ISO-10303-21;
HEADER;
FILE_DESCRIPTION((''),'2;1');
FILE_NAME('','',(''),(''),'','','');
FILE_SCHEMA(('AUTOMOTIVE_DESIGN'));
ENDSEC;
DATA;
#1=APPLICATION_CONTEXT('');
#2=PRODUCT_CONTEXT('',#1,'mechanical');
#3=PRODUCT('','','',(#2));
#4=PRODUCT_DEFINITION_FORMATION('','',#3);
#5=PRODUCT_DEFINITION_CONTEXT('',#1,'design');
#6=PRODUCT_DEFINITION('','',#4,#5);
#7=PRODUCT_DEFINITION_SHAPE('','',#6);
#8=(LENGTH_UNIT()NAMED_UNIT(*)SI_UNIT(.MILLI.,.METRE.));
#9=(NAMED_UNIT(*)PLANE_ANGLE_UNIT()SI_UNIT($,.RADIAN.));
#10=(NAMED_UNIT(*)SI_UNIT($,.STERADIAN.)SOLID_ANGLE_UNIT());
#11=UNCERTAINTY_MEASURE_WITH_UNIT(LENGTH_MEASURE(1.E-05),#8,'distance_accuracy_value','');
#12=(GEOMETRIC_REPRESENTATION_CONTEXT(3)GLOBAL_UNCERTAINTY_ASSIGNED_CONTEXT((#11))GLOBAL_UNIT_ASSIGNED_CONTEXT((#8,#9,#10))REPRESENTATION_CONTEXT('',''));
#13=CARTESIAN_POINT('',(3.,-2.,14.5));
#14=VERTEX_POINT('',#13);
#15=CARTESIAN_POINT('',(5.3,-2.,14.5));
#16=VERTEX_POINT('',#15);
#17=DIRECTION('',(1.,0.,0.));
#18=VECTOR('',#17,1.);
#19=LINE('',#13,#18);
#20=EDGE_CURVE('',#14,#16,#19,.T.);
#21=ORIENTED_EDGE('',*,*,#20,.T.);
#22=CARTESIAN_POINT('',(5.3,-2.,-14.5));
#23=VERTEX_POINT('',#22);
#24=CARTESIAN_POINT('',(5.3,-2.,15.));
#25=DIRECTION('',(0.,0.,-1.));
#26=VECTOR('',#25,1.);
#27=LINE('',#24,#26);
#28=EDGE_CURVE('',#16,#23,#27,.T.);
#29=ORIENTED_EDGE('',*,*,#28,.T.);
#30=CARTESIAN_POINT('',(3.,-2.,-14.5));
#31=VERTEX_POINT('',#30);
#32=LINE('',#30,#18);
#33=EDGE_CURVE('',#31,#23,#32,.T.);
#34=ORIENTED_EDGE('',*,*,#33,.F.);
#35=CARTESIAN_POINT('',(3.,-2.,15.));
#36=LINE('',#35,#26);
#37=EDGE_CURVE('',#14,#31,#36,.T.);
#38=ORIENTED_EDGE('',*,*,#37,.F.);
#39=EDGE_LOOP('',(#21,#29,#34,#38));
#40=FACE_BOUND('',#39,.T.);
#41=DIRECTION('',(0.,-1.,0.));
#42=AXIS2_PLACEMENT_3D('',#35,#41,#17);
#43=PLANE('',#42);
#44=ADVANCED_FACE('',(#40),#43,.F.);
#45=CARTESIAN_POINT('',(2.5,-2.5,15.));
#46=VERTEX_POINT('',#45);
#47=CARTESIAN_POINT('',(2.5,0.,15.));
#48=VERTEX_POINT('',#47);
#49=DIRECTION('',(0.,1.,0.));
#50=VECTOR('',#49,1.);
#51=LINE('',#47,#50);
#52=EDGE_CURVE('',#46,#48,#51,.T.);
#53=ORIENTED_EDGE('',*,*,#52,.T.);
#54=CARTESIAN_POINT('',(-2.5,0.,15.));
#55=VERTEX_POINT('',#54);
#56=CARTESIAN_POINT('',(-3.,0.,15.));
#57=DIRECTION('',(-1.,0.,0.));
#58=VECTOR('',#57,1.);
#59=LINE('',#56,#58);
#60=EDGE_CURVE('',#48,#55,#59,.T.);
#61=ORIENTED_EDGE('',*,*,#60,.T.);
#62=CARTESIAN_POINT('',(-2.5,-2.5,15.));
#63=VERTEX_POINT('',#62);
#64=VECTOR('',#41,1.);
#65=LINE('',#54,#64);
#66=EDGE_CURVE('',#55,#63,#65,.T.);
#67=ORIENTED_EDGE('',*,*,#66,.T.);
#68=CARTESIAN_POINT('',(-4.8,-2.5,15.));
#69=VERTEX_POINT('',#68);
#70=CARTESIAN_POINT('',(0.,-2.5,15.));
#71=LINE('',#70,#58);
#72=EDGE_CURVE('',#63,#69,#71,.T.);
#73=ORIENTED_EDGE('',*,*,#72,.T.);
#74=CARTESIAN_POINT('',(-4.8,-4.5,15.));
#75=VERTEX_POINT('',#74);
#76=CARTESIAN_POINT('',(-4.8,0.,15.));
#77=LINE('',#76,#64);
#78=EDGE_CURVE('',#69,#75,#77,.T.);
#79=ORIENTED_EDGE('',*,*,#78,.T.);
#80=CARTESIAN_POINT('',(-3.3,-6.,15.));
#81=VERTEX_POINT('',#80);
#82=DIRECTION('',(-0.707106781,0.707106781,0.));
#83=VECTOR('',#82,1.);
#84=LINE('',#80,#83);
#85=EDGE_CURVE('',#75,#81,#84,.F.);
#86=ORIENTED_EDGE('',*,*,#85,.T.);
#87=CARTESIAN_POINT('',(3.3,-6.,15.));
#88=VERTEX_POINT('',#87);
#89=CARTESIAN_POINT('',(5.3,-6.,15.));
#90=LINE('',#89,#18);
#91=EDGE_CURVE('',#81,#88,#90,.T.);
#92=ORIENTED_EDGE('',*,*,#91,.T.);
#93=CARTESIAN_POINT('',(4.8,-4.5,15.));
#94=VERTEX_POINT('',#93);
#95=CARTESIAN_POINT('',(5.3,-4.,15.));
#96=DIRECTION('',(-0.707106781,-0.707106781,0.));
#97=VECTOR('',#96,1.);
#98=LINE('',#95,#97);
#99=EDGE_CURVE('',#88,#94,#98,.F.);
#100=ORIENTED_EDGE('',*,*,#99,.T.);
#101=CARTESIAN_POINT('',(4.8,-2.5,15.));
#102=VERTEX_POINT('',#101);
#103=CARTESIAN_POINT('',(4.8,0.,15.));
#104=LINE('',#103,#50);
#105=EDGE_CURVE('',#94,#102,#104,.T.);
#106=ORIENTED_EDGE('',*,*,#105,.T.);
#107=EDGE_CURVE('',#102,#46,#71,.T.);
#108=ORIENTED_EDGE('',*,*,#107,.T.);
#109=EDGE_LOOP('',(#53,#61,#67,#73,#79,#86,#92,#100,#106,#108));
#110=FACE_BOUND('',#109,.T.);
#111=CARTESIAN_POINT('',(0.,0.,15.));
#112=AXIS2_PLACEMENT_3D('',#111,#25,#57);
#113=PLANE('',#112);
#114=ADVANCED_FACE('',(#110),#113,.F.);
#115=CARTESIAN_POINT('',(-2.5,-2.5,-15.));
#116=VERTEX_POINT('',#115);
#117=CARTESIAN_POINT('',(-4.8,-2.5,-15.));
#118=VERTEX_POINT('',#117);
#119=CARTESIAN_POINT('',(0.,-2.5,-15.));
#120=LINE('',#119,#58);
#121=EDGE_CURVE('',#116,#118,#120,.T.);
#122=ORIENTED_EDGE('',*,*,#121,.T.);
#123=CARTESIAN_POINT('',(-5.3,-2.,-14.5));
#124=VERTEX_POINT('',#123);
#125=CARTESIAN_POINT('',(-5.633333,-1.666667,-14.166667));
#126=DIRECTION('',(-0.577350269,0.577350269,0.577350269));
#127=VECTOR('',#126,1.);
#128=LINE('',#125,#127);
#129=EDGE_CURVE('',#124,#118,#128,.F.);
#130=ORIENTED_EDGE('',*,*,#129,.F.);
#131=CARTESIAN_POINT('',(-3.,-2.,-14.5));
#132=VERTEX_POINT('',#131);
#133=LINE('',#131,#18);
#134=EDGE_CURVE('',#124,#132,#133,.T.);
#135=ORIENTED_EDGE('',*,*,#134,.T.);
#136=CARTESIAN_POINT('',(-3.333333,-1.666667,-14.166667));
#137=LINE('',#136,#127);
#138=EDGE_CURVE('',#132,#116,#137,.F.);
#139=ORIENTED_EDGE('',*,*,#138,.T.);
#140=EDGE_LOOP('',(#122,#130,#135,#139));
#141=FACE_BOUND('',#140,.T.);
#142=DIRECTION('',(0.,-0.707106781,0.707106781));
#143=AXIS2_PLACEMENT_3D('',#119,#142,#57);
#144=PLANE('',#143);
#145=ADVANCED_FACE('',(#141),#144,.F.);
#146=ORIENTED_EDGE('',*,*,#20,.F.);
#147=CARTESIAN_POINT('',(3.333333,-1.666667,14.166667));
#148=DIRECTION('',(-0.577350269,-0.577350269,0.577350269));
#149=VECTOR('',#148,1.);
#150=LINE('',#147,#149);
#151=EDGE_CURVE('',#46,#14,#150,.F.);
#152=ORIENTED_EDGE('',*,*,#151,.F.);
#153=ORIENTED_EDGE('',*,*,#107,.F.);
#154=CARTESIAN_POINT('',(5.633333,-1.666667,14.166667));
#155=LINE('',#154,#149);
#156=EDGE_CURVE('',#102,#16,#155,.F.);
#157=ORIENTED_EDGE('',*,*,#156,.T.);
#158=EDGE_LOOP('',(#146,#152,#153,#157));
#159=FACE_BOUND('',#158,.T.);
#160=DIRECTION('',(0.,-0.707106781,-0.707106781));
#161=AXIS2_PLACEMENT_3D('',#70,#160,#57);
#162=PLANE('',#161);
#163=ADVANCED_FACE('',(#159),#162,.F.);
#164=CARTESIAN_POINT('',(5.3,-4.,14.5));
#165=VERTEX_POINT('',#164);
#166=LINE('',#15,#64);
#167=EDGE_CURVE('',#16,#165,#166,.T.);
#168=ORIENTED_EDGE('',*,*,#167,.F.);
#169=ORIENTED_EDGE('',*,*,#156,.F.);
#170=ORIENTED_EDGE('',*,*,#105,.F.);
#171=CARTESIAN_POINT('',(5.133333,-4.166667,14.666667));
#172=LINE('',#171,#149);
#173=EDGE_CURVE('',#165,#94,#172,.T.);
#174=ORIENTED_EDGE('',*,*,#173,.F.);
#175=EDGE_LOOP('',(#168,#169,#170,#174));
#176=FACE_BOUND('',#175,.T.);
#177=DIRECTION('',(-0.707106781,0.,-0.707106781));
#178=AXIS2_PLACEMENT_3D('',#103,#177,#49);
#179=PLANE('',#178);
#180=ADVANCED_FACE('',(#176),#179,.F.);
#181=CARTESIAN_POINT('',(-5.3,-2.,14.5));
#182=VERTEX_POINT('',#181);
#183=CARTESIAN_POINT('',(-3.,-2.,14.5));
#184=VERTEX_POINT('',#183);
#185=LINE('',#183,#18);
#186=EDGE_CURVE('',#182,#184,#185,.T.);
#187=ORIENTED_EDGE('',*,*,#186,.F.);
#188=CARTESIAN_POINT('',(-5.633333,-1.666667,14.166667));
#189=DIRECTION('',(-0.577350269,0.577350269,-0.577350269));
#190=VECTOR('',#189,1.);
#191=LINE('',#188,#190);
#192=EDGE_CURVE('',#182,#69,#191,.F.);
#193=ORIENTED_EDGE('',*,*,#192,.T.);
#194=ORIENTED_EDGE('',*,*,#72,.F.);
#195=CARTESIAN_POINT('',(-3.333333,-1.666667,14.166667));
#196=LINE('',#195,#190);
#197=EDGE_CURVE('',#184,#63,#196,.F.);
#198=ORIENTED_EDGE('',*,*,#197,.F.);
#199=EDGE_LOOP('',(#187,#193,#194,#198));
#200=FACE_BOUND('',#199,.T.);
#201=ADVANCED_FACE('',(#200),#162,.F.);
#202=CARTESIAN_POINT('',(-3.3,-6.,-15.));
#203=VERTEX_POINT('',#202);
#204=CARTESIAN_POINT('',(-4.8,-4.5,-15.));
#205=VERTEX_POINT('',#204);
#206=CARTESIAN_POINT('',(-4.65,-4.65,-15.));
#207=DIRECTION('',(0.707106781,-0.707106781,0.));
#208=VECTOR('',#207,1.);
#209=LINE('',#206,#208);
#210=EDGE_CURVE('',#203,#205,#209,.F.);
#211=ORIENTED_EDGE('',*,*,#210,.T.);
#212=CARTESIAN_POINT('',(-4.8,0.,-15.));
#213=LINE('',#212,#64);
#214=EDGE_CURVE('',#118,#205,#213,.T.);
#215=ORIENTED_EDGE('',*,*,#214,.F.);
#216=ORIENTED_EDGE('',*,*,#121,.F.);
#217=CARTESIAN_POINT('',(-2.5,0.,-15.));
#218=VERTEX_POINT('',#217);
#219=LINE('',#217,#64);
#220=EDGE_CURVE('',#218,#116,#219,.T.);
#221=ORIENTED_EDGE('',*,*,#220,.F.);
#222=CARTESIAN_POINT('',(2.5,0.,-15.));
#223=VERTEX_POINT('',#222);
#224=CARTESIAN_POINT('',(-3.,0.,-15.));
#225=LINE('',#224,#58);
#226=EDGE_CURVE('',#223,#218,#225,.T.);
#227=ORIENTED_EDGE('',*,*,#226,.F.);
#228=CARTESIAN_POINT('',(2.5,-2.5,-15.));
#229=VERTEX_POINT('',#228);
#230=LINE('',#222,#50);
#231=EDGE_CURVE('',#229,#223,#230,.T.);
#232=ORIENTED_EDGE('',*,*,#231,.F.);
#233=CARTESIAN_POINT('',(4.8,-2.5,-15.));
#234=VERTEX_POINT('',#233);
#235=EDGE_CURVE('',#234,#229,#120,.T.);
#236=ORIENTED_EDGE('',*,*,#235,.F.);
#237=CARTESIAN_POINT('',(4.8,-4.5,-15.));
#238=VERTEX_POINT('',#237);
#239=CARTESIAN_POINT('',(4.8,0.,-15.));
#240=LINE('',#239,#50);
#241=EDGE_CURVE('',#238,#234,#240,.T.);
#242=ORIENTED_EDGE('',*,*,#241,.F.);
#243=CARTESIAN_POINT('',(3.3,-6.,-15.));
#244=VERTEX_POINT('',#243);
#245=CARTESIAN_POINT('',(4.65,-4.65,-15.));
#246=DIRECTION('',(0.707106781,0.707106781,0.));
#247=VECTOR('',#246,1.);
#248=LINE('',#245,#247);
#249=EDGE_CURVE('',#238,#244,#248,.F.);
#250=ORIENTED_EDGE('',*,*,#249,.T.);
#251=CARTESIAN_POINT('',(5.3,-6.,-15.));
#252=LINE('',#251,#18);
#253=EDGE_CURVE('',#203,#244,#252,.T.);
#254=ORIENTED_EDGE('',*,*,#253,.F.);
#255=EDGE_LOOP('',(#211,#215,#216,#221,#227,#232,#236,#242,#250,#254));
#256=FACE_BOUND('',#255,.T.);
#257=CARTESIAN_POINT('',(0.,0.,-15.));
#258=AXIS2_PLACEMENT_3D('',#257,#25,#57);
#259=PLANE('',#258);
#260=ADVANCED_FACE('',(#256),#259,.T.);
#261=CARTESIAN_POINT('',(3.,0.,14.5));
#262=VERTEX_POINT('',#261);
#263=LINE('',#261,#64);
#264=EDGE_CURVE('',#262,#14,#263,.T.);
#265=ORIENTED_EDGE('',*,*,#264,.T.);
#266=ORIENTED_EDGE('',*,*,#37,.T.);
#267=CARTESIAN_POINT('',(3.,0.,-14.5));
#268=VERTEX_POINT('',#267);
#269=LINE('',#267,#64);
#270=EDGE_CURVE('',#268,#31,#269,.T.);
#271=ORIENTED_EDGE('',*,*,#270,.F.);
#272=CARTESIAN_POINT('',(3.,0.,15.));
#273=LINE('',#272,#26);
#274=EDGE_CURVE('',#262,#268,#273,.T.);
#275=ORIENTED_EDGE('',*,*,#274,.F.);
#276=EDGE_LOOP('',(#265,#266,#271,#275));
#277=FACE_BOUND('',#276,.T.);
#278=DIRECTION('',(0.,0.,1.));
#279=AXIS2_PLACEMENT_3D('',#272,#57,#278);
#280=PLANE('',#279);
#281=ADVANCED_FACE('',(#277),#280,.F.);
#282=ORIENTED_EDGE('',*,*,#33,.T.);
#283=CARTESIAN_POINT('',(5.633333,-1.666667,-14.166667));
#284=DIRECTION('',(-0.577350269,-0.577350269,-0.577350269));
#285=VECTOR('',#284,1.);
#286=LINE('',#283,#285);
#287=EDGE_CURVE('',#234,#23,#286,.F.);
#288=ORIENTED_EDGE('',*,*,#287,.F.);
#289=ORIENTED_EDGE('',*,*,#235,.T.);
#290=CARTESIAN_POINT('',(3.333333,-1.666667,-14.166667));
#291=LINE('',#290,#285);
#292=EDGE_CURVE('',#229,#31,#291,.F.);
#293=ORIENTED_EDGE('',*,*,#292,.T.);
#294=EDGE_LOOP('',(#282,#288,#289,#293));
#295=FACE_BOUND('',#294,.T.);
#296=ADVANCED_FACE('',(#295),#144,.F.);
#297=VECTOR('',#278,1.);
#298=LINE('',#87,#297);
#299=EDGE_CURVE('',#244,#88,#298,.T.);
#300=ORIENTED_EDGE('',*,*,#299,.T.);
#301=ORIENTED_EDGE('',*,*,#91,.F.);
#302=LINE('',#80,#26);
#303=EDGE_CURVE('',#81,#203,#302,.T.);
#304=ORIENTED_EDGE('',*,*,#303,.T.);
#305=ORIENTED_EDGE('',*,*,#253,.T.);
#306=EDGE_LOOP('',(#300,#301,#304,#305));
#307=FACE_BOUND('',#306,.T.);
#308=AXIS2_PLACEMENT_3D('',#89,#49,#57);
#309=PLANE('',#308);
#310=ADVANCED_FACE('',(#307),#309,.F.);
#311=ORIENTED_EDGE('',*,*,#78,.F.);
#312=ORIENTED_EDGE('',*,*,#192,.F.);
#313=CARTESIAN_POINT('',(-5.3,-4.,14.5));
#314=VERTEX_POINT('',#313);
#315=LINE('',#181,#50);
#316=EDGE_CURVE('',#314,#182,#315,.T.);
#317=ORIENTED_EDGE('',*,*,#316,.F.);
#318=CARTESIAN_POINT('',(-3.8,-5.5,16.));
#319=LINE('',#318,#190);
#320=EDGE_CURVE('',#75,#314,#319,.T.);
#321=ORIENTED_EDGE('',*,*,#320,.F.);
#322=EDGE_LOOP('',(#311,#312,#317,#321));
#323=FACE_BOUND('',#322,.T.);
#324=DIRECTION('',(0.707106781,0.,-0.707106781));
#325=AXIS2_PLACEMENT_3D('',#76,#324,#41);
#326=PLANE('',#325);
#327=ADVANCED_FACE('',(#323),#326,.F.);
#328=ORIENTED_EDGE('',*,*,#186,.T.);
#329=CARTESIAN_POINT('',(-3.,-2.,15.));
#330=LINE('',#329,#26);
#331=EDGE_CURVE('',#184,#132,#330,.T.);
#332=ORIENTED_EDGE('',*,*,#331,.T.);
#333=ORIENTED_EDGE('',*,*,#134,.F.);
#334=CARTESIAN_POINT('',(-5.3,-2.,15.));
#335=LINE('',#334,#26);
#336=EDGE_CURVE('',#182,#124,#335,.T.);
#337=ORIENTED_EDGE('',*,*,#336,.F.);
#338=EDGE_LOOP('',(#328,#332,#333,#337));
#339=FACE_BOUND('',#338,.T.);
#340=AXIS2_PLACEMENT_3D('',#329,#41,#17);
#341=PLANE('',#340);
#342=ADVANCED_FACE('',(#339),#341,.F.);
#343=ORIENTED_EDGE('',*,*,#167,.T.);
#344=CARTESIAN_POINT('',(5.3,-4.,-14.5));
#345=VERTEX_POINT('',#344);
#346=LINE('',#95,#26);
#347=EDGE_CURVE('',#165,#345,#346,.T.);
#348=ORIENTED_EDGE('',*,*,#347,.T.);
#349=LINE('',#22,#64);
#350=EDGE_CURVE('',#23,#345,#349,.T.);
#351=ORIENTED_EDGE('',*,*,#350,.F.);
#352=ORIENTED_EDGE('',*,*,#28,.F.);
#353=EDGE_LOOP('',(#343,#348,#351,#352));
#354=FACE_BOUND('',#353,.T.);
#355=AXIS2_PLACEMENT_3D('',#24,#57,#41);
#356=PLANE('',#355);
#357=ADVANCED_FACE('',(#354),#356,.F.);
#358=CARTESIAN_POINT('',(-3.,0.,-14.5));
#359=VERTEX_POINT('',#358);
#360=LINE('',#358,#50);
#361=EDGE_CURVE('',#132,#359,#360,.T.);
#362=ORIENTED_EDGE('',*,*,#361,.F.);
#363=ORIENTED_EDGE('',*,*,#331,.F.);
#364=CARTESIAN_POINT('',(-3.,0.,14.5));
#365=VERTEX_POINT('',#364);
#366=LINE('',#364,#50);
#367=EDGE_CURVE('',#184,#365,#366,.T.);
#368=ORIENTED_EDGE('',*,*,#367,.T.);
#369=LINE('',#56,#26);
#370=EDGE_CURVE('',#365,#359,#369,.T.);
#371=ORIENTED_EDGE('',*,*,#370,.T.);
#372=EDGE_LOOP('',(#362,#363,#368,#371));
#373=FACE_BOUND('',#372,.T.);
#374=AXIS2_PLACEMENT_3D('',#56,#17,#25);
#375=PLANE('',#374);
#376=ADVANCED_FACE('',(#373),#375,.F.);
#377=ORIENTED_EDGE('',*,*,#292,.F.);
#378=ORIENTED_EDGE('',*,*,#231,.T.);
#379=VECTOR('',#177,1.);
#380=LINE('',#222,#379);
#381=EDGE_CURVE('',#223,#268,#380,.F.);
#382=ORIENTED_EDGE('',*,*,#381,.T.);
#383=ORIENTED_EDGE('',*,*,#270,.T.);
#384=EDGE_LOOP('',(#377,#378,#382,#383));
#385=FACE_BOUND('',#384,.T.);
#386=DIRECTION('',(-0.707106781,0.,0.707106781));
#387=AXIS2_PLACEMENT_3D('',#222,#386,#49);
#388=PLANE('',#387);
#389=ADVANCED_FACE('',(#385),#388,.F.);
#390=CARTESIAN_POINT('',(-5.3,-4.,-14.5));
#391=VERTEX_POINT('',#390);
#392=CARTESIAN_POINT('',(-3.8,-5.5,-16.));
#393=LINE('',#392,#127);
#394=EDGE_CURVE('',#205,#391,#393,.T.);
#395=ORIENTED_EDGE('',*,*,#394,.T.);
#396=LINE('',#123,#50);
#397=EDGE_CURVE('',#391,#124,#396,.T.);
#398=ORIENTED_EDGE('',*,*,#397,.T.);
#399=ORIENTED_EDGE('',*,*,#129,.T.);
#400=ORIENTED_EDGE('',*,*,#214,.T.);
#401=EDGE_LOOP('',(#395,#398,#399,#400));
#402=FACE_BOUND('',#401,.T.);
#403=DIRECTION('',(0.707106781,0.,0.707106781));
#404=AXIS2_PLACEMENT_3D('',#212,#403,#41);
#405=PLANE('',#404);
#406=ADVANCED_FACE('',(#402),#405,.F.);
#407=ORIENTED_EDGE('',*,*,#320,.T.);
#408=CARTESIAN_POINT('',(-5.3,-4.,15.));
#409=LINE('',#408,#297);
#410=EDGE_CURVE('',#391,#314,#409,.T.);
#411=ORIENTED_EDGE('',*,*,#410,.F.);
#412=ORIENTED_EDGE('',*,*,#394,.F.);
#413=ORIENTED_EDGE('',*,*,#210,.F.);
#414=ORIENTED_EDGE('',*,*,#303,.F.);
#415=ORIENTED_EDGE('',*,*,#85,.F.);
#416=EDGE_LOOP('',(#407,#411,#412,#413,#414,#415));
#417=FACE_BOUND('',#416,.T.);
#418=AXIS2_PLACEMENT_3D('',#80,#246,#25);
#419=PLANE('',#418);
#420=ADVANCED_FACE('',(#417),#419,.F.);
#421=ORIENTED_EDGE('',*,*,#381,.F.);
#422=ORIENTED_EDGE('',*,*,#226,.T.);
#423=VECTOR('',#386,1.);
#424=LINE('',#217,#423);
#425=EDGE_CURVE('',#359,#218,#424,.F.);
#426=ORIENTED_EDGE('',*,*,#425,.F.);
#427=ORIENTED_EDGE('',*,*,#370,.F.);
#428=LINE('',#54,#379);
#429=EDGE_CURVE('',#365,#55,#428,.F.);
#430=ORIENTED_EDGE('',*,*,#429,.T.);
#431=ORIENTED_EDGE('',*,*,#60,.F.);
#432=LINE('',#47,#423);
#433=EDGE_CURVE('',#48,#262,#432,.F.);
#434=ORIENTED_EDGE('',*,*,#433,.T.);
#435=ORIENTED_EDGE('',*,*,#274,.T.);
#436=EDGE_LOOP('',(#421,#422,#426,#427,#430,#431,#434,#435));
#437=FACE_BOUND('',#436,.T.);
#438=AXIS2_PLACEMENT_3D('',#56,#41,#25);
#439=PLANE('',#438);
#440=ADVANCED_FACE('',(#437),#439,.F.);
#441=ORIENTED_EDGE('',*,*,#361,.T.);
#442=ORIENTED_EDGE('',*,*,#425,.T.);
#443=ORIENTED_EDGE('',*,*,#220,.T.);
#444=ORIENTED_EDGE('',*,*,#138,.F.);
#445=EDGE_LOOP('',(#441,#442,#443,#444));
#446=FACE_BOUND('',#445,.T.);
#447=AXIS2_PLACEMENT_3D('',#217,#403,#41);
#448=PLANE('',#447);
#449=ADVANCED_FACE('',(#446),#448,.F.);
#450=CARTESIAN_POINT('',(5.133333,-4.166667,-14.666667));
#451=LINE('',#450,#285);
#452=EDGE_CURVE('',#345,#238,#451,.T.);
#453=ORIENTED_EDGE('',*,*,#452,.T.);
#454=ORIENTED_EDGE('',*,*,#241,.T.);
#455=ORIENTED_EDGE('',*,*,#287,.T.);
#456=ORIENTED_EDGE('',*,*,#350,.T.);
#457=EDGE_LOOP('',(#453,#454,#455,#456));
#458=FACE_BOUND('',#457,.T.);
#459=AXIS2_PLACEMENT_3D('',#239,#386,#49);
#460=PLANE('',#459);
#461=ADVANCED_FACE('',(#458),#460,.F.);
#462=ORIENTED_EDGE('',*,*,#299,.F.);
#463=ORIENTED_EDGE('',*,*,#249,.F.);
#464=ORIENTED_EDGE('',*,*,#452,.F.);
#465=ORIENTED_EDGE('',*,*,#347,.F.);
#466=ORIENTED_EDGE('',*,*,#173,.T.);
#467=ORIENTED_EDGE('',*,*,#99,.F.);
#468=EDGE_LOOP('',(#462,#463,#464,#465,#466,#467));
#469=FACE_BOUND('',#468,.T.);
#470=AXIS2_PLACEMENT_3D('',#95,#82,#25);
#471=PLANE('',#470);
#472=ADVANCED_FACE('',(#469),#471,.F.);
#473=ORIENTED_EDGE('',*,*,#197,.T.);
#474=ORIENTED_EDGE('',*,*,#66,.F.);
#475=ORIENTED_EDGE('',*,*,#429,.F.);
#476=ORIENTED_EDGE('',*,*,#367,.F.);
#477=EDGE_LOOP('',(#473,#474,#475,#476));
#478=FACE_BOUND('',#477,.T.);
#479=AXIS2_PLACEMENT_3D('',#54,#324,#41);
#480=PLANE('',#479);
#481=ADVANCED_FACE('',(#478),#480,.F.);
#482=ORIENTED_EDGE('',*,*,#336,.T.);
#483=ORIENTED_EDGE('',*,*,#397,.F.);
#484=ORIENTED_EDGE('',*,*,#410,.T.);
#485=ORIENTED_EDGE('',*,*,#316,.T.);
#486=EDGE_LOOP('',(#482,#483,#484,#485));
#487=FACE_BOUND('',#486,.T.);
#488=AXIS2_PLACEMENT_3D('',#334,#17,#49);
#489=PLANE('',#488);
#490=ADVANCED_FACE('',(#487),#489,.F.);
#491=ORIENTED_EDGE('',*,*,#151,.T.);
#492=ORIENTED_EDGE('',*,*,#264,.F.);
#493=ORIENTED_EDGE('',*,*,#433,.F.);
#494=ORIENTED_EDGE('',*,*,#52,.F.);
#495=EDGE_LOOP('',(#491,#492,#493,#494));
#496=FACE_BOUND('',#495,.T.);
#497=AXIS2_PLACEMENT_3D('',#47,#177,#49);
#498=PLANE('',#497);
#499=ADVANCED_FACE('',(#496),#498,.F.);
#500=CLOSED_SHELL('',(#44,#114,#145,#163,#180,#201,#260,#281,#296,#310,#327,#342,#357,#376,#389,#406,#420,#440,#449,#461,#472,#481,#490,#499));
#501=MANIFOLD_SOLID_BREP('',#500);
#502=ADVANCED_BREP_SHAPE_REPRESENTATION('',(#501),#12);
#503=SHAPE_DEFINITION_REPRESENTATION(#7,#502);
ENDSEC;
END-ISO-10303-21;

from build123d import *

# Parameters (mm, degrees)
EXTRUDE_1_DEPTH  = 15
CHAMFER_1_SIZE   = 2
CHAMFER_2_SIZE   = 0.5
MIRROR_START     = -8.660254038
MIRROR_2_DEPTH   = 2.193931023
MIRROR_START_2   = 6.466323015
MIRROR_2_2_DEPTH = 2.193931023


# Read off the part's stored shape, not the designer's step: 镜向2
with BuildPart() as part:
    # 草图1 → 凸台-拉伸1 (new, symmetric)
    with BuildSketch(Plane.XY):
        Polygon((-3, 0), (3, 0), (3, -2), (5.3, -2), (5.3, -6), (-5.3, -6), (-5.3, -2), (-3, -2), align=None)
    extrude(amount=EXTRUDE_1_DEPTH, both=True)

    # 倒角1
    chamfer_1_edges = [part.edges().sort_by_distance(p)[0] for p in [
        (5.3, -6, 0),
        (-5.3, -6, 0),
    ]]
    chamfer(chamfer_1_edges, length=CHAMFER_1_SIZE)

    # 倒角2
    chamfer_2_edges = [part.edges().sort_by_distance(p)[0] for p in [
        (-3, -1, 15),
        (-4.15, -2, 15),
        (-5.3, -3, 15),
        (5.3, -3, 15),
        (4.15, -2, 15),
        (3, -1, 15),
    ]]
    chamfer(chamfer_2_edges, length=CHAMFER_2_SIZE)

    # 镜向2 outline → 镜向2 (cut)
    with BuildSketch(Plane(origin=(0, 0, 0), x_dir=(0.8164965809277261, -0.4082482904638631, -0.4082482904638625), z_dir=(0.5773502691896255, 0.5773502691896263, 0.5773502691896255)).offset(MIRROR_START)):
        Polygon((9.185586535, 8.838834765), (11.063528672, 8.838834765), (11.880025252, 7.424621202), (12.702530685, 6), (13, 6), (13, 12), (7.360486936, 12), (8.164965809, 10.606601718), align=None)
    extrude(amount=MIRROR_2_DEPTH, mode=Mode.SUBTRACT)

    # Mirror 2 2 outline → Mirror 2 2 (cut)
    with BuildSketch(Plane(origin=(0, 0, 0), x_dir=(0.816496580927727, 0.4082482904638606, 0.4082482904638635), z_dir=(0.5773502691896244, -0.5773502691896244, -0.5773502691896285)).offset(MIRROR_START_2)):
        Polygon((-8.164965809, -10.606601718), (-9.185586535, -8.838834765), (-11.063528672, -8.838834765), (-11.880025252, -7.424621202), (-12.702530685, -6), (-13, -6), (-13, -12), (-7.360486936, -12), align=None)
    extrude(amount=MIRROR_2_2_DEPTH, mode=Mode.SUBTRACT)


solid = part.part
